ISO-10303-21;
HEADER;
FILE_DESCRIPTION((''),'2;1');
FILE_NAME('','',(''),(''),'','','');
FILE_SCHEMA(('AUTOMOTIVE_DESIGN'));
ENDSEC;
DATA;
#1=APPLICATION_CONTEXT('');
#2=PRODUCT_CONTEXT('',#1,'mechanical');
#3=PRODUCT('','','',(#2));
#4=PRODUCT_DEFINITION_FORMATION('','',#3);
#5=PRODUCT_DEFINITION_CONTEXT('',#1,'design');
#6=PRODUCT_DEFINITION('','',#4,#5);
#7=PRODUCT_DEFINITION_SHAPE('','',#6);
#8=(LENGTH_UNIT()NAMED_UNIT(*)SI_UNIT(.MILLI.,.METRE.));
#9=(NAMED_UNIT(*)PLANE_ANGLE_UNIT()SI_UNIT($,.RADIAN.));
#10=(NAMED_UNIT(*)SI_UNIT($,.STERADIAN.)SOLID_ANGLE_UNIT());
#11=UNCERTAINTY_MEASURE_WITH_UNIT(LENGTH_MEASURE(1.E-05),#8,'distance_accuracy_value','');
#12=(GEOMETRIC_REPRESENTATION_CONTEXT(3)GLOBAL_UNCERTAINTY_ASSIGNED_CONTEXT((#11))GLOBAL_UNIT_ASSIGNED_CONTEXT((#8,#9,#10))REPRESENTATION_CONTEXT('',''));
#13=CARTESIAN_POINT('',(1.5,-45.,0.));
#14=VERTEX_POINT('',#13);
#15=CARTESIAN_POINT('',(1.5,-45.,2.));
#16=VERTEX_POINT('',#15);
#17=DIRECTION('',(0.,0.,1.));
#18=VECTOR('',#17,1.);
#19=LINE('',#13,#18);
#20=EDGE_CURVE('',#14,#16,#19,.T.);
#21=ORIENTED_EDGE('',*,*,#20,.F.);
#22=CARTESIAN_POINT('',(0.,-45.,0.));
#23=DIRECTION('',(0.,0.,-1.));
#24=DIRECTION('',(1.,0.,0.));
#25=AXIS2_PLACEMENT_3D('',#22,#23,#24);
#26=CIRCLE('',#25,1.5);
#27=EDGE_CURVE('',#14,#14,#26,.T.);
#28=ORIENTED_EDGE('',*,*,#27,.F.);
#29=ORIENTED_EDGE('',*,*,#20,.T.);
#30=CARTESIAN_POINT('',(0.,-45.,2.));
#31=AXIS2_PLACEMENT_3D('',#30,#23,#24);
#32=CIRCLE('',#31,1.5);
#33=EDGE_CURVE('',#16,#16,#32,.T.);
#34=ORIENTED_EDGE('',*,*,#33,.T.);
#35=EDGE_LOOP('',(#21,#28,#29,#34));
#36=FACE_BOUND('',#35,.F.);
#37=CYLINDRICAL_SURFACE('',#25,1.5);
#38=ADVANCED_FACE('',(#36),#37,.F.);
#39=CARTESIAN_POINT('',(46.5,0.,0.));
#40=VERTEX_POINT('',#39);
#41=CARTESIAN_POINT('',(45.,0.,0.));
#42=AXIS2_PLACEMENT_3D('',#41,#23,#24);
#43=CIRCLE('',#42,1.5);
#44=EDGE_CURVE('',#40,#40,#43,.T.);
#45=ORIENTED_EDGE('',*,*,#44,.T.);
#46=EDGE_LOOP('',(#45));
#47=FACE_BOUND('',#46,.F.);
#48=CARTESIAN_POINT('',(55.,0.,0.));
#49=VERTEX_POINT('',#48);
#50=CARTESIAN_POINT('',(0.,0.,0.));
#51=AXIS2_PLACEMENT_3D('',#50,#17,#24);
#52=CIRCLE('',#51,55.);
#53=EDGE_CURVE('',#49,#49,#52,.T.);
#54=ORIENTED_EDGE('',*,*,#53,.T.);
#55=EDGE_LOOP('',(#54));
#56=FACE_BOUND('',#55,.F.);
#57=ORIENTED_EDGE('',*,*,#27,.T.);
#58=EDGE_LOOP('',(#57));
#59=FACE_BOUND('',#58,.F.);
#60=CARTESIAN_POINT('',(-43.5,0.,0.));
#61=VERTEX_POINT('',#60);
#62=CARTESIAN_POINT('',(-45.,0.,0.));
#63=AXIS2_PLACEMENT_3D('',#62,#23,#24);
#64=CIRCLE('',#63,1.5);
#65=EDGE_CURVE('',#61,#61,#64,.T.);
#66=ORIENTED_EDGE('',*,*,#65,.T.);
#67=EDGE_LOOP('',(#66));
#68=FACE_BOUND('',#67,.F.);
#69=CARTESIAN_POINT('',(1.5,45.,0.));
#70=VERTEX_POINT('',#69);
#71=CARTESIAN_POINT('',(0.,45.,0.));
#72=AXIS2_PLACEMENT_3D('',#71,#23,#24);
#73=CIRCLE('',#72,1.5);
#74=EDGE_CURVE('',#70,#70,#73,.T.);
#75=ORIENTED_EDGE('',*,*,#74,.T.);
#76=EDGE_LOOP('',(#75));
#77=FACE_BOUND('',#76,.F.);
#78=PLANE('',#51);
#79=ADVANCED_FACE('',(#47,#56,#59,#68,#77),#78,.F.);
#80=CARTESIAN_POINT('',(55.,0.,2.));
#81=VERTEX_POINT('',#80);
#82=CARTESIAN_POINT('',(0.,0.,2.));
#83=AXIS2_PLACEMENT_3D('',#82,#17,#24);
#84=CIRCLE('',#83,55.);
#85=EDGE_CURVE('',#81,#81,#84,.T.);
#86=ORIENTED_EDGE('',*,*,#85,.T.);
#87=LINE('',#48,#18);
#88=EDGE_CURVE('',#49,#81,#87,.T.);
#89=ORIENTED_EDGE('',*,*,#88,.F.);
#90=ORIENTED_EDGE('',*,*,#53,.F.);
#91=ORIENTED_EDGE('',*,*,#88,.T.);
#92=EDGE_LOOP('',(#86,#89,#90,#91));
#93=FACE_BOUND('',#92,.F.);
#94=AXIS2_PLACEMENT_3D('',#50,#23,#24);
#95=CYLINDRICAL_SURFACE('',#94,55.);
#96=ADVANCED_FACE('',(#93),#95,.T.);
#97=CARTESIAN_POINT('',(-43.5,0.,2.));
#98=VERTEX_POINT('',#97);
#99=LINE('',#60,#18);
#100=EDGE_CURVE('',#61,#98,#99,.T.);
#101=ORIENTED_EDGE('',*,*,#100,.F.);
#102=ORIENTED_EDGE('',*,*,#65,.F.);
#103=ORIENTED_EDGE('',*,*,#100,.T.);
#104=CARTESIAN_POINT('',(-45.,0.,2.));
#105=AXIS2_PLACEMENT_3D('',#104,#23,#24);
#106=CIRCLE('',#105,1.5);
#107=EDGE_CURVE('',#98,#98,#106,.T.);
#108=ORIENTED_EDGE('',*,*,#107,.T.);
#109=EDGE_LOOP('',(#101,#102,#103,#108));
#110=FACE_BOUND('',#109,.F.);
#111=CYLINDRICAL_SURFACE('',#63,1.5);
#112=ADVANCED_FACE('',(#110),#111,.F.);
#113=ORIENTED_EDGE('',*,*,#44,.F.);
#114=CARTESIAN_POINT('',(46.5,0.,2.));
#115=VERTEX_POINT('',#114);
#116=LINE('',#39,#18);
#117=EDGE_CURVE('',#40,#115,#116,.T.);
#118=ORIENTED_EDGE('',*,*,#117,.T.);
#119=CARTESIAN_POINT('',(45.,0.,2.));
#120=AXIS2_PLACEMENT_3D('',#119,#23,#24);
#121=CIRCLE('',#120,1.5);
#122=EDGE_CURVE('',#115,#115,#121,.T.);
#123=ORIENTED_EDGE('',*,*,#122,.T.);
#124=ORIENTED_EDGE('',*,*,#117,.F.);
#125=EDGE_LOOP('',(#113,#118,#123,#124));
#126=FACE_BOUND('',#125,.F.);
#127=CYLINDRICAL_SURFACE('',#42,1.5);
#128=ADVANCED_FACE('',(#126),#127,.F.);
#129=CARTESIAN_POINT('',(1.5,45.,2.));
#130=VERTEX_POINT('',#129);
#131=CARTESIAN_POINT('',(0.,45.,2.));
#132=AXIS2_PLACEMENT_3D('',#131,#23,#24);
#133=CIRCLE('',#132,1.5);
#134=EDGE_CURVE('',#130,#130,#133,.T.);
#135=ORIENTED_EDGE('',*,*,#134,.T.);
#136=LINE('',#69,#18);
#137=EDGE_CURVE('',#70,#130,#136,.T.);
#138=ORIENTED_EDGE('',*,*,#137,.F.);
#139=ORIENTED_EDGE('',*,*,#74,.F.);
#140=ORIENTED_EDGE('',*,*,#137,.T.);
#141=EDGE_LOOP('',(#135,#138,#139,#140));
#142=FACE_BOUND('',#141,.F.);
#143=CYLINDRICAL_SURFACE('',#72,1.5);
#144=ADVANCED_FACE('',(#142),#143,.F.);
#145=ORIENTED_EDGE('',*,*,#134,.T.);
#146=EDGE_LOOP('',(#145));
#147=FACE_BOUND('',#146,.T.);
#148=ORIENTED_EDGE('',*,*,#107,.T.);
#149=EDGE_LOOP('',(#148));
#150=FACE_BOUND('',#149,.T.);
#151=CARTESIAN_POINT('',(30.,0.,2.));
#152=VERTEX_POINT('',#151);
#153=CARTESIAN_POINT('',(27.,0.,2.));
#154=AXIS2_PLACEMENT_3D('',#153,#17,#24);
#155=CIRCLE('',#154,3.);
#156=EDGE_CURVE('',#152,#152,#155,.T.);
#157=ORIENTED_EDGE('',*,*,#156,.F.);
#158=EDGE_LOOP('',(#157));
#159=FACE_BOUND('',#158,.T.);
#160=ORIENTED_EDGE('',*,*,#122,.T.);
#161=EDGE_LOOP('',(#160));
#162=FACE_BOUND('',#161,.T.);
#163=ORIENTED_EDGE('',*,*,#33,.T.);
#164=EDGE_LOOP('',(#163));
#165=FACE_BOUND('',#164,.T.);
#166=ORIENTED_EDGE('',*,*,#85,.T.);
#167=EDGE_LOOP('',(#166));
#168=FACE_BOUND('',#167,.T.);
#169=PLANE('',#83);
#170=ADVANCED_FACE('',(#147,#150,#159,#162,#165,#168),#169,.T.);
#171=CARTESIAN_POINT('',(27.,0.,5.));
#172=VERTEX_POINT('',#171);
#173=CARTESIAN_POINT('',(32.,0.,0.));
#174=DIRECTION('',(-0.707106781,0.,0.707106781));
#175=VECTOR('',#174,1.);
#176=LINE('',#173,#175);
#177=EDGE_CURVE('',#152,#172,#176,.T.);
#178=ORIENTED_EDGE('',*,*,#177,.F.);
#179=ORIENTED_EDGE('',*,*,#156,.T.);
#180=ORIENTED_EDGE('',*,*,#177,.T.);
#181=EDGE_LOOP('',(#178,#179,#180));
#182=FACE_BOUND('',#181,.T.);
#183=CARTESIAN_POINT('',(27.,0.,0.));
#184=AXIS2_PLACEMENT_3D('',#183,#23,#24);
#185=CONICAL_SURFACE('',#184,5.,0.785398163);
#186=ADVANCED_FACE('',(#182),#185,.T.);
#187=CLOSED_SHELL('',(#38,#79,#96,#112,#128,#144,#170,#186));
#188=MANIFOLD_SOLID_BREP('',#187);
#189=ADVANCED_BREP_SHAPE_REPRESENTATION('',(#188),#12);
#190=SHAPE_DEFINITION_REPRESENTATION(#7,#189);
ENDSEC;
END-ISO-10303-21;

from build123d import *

# Parameters (mm, degrees)
F0_R     = 55
F1_DEPTH = 2
F2_R     = 1.5
F3_DEPTH = 25
F4_R     = 5
F5_DEPTH = 3


# Not quite as in the source:
# - a fillet or chamfer that OpenCascade refuses, or shapes differently, is made with other operations: its cross-section is extruded or revolved along the edge and cut away or added
# - a feature names something its author has since deleted; it is built from what else it names


with BuildPart() as f1:
    # F0 (on Top) → F1 (new body)
    with BuildSketch(Plane.XY):
        Circle(F0_R)
    extrude(amount=F1_DEPTH)

    # F2 (on face) → F3 (cut)
    with BuildSketch(Plane(origin=(0, 0, 0), x_dir=(1, 0, 0), z_dir=(0, 0, -1))):
        with Locations((-45, 0)):
            Circle(F2_R)
        with Locations((0, 45)):
            Circle(F2_R)
        with Locations((45, 0)):
            Circle(F2_R)
        with Locations((0, -45)):
            Circle(F2_R)
    extrude(amount=-F3_DEPTH, mode=Mode.SUBTRACT)

    # F4 (on face) → F5 (join)
    with BuildSketch(Plane.XY.offset(2)):
        with Locations((27, 0)):
            Circle(F4_R)
    extrude(amount=F5_DEPTH)

    # F6: chamfer of 5 on 1 edges, made by hand


with BuildPart() as f6_tool2:
    # F6_s3 → F6_t4 (revolve)
    with BuildSketch(Plane.XZ):
        Polygon((32, 0), (27, 5), (32, 5), align=None)
    revolve(axis=Axis((27, 0, 5), (0, 0, 1)))

    split(bisect_by=Plane.XY.offset(2), keep=Keep.TOP)


with BuildPart() as f1_1:
    add(f1.part)

    # F6_t1: cut F6_tool2
    add(f6_tool2.part, mode=Mode.SUBTRACT)


solid = f1_1.part
